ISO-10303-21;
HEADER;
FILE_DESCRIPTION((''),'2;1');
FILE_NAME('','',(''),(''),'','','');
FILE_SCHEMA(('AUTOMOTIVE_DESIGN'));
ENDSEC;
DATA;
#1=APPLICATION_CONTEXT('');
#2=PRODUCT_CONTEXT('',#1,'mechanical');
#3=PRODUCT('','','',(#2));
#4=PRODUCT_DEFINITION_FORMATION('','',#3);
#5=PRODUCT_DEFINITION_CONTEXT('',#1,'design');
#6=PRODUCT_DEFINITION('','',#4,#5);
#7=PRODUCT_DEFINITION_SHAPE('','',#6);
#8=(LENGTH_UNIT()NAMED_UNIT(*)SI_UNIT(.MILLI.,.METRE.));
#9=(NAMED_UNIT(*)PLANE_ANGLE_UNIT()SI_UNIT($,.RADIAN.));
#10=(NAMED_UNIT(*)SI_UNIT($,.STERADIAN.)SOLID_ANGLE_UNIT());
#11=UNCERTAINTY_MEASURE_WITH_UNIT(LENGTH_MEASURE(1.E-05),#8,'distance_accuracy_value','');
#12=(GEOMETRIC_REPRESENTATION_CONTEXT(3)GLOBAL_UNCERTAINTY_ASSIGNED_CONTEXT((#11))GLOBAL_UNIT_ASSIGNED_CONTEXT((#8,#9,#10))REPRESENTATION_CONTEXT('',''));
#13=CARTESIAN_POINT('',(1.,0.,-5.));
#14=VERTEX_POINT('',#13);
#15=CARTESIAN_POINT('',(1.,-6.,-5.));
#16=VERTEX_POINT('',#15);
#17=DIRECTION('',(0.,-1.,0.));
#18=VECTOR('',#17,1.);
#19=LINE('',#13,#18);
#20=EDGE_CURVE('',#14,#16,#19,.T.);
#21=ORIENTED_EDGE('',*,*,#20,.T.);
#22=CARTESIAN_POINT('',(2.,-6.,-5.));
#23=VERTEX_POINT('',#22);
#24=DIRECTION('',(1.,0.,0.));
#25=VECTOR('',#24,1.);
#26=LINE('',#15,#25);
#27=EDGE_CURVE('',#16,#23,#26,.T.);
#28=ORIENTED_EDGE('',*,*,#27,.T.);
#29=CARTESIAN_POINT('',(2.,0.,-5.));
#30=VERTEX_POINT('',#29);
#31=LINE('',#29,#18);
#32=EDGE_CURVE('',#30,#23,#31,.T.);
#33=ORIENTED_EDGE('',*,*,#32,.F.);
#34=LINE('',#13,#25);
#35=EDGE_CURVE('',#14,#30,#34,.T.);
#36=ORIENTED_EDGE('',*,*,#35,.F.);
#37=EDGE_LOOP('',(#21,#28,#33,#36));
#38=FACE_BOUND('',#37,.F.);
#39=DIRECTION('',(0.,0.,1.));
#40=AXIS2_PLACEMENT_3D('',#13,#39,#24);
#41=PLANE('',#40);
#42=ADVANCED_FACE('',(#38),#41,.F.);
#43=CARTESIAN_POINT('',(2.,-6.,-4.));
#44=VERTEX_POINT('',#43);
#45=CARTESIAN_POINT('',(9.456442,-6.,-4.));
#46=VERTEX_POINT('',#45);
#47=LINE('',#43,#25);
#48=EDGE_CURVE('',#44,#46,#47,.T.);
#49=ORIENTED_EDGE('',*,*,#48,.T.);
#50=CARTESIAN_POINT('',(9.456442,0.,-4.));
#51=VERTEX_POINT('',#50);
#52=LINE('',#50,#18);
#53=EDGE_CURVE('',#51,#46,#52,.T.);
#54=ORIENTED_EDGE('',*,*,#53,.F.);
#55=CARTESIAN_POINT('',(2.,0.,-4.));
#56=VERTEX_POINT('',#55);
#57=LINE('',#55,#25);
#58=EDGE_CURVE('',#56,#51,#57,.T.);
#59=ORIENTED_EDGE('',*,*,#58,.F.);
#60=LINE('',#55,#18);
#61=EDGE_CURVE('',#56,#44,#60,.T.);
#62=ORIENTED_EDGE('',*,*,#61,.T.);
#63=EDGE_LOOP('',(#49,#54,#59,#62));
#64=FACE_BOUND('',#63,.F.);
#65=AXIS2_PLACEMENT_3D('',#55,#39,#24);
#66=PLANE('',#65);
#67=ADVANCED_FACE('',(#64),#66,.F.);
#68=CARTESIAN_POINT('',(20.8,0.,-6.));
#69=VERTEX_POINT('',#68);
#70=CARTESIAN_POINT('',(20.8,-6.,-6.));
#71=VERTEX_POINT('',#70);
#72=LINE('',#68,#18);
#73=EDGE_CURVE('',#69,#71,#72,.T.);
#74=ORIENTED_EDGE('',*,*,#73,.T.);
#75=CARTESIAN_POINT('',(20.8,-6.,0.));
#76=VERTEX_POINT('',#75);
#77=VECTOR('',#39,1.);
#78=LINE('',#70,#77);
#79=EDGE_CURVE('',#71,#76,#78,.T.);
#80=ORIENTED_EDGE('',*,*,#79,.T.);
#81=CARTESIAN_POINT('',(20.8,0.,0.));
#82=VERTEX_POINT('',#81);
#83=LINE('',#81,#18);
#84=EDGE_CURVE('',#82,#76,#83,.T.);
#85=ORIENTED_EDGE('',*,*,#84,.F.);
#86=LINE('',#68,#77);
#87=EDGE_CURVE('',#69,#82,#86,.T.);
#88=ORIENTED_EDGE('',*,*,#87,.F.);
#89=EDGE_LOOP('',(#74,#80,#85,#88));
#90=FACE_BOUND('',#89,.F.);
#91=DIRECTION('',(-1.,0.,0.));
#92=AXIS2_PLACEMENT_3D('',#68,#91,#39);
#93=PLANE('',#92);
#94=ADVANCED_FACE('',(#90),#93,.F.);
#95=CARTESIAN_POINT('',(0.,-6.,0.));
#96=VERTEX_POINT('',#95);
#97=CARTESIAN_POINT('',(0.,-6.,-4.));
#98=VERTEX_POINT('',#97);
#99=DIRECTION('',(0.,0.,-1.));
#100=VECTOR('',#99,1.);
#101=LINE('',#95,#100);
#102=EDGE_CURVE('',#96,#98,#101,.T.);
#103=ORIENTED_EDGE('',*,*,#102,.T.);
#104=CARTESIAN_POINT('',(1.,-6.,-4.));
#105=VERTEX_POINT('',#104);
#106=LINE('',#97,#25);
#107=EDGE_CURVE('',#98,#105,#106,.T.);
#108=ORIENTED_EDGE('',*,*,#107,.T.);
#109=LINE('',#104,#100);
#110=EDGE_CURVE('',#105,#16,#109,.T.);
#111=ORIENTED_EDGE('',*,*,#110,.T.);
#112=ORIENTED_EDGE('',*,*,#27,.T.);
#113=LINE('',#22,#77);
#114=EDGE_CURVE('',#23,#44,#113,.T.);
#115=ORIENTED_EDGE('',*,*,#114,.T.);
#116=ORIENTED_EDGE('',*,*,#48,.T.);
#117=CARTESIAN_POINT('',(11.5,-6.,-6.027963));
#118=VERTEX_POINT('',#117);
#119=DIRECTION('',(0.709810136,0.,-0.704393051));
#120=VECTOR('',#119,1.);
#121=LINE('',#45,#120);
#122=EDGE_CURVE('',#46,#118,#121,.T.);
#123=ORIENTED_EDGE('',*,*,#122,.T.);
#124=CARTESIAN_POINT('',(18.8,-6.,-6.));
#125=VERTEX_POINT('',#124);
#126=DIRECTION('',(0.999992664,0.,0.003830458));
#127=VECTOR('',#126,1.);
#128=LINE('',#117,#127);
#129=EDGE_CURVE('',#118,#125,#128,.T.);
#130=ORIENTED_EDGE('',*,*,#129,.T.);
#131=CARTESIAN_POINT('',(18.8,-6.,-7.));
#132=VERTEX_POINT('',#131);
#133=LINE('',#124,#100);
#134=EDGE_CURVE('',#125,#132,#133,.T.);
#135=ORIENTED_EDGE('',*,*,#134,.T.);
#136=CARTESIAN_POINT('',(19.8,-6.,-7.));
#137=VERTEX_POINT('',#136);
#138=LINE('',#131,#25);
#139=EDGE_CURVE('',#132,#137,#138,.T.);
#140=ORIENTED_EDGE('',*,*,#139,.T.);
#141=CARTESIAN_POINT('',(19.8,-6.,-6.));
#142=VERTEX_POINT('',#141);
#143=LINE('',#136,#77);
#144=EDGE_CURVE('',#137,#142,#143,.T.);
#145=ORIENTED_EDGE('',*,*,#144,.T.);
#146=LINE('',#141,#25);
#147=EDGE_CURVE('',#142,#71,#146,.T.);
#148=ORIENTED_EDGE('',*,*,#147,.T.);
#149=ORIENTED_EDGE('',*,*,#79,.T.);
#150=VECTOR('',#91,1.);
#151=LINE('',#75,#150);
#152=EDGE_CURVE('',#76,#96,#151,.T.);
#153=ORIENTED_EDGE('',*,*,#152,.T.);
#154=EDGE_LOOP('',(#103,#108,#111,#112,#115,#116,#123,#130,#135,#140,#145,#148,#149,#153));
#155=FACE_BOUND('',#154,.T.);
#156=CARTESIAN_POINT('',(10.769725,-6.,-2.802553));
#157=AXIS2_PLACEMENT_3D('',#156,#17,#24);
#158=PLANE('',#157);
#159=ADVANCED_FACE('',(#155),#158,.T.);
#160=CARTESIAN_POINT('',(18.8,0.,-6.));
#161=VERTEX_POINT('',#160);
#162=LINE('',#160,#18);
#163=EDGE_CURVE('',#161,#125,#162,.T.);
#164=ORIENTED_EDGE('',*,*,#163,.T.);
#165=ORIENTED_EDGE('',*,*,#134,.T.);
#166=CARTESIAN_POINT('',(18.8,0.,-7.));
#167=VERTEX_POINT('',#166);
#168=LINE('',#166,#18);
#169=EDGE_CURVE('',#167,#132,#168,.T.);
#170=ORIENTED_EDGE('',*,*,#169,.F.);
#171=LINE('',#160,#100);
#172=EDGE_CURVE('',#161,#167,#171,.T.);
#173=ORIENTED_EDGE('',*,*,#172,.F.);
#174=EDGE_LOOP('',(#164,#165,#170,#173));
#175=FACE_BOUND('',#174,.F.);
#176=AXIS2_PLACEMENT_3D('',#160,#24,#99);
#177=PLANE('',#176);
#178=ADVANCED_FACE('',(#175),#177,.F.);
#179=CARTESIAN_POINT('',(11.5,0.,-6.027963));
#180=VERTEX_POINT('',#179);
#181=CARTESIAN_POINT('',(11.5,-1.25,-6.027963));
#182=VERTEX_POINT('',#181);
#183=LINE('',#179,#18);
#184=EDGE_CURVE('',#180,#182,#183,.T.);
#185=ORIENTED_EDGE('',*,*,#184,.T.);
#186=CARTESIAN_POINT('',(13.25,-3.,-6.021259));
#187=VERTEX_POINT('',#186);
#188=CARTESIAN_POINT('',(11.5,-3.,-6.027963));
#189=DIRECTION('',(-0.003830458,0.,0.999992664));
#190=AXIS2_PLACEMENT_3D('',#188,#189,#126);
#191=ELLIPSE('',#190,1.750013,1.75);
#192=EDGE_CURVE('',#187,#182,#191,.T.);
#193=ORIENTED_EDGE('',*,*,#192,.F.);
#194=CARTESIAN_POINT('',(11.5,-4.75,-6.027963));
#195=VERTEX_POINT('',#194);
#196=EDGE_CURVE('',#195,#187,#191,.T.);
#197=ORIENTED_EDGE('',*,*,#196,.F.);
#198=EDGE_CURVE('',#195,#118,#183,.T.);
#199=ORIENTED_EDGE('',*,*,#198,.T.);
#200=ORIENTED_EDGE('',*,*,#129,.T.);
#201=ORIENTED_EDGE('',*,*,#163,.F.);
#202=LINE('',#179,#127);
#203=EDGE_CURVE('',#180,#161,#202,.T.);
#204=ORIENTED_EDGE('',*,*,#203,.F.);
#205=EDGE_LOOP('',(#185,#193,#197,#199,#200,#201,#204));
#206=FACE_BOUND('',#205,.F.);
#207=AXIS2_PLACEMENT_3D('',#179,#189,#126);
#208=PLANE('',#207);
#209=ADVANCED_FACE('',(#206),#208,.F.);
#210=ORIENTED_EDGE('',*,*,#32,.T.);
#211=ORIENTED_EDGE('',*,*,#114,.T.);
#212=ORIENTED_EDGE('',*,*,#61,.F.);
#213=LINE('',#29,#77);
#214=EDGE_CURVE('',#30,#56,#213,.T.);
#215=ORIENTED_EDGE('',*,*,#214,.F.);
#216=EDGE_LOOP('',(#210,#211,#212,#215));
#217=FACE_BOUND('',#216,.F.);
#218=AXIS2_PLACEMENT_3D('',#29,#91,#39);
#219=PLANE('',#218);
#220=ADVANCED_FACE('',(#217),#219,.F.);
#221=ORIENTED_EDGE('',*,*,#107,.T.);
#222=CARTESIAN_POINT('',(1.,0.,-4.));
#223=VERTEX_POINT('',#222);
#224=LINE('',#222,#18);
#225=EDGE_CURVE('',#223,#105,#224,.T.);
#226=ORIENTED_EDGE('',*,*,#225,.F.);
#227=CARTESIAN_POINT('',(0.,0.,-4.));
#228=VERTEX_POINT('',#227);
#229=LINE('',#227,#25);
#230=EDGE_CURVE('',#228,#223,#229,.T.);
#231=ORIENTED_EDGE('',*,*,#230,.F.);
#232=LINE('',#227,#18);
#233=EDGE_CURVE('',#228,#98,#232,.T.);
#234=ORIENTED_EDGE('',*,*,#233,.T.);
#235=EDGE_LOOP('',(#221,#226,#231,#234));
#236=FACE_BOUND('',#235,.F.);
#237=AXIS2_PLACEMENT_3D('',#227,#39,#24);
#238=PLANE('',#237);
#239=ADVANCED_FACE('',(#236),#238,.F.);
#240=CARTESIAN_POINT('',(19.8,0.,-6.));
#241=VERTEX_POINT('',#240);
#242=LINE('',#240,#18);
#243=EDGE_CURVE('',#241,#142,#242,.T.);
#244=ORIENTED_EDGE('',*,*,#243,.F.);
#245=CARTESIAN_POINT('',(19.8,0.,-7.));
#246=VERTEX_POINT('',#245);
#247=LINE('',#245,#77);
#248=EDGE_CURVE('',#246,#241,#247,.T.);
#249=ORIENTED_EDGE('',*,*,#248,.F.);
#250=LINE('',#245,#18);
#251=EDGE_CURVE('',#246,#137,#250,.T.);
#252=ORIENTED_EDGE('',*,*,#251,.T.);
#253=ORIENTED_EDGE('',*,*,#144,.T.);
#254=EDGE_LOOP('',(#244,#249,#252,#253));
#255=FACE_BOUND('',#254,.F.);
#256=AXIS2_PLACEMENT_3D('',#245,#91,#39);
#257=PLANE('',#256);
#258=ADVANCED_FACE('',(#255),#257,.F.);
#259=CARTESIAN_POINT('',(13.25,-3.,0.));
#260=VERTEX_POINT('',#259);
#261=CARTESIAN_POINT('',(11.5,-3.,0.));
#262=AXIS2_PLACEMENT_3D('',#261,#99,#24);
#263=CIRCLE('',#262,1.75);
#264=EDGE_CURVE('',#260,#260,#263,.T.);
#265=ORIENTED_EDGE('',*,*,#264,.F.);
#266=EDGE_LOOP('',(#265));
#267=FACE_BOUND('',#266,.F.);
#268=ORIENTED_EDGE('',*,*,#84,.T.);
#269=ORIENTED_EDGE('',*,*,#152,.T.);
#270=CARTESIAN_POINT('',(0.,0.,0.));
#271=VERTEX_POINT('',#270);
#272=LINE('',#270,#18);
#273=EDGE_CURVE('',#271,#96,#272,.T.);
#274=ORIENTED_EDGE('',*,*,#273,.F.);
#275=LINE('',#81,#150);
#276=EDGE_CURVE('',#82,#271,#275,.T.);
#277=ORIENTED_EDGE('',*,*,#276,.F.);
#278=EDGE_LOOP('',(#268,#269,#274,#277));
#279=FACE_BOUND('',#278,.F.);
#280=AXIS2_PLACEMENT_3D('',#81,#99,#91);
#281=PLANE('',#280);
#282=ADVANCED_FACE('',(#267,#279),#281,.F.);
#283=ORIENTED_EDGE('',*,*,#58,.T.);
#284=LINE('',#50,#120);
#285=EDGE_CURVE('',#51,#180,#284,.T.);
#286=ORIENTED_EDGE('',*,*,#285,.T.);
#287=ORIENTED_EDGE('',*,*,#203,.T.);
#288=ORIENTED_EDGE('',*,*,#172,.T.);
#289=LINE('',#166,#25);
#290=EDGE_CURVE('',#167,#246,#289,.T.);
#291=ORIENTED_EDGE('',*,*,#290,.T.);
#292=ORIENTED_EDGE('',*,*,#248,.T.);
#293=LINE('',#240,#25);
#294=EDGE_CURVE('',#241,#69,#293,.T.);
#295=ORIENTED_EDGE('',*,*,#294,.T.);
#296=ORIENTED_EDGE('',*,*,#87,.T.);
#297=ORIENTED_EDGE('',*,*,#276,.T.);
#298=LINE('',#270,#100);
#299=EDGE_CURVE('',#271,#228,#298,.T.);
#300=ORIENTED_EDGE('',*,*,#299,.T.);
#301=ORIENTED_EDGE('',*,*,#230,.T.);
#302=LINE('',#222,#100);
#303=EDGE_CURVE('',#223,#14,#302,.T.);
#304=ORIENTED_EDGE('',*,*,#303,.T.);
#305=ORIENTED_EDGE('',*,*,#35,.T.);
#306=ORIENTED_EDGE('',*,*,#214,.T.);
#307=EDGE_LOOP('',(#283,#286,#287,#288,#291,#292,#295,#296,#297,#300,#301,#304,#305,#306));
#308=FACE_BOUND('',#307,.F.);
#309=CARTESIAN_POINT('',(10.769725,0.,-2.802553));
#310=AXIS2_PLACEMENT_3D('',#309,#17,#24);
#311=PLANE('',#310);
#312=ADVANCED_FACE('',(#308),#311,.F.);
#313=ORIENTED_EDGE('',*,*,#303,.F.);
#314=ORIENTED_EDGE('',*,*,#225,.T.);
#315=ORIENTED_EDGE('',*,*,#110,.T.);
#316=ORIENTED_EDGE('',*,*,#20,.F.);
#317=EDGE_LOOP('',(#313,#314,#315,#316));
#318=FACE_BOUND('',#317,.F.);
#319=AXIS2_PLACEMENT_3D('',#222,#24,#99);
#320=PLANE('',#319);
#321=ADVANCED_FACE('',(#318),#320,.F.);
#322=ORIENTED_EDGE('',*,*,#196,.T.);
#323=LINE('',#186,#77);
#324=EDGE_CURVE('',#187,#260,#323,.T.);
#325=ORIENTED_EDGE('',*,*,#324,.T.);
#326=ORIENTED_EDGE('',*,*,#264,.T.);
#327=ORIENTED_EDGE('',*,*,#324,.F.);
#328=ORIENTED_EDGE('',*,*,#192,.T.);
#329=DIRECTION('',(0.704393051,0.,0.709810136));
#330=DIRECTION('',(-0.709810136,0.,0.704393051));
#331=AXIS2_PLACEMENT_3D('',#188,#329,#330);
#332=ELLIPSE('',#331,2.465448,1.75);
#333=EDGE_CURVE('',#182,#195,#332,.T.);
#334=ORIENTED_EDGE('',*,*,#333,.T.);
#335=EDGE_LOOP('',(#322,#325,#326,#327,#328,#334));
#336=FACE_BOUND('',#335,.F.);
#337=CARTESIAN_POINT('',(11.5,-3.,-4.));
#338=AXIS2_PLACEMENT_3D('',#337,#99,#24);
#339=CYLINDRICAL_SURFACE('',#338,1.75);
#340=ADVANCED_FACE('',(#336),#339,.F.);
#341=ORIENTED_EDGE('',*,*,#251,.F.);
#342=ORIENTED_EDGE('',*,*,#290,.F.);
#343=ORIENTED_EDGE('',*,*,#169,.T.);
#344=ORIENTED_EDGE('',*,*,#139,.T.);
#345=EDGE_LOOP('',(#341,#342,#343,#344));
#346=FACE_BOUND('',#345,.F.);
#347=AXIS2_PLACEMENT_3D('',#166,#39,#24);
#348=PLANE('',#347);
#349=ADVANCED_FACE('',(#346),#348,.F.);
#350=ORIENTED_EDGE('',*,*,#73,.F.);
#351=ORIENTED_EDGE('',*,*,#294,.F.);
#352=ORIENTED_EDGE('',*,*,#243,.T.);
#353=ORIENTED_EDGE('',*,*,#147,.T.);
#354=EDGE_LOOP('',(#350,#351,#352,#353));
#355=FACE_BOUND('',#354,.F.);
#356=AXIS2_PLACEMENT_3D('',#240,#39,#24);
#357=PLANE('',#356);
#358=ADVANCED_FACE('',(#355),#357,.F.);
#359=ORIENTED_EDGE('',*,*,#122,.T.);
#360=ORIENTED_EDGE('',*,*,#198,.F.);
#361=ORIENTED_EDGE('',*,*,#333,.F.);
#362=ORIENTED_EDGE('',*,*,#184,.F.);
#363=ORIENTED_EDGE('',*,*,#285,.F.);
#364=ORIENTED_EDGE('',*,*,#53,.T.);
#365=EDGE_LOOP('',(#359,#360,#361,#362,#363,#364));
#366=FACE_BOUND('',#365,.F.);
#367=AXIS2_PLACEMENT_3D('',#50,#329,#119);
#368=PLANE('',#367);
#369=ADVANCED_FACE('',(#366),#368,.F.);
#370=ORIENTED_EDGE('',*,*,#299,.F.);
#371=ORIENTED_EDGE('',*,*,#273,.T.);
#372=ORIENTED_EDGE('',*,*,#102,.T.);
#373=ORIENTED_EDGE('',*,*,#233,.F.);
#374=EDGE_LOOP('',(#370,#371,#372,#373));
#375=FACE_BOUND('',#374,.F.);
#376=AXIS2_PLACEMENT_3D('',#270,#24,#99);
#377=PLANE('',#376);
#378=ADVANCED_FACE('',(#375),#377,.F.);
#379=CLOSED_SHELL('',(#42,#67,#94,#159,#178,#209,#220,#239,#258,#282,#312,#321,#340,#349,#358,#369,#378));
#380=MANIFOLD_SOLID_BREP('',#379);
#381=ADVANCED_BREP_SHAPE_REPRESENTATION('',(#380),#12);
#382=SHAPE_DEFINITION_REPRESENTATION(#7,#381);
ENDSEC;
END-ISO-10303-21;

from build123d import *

# Parameters (mm, degrees)
F1_DEPTH      = 6
F2_R          = 1.75
F3_DEPTH      = 4.001
F3_DEPTH_BACK = 3.001


# Not quite as in the source:
# - a feature of the source that left no trace in its solid (it failed there, or was rolled back) is left out


with BuildPart() as f1:
    # F0 (on Front) → F1 (new body)
    with BuildSketch(Plane.XZ):
        Polygon((20.8, 0), (0, 0), (0, -4), (1, -4), (1, -5), (2, -5), (2, -4), (9.4564415496, -4), (11.5, -6.0279625468), (18.8, -6), (18.8, -7), (19.8, -7), (19.8, -6), (20.8, -6), align=None)
    extrude(amount=F1_DEPTH)

    # F2 (on face) → F3 (cut, two sides)
    with BuildSketch(Plane(origin=(0, 0, -4), x_dir=(1, 0, 0), z_dir=(0, 0, -1))) as f3_sk:
        with Locations((11.5, 3)):
            Circle(F2_R)
    extrude(amount=-F3_DEPTH, mode=Mode.SUBTRACT)
    extrude(f3_sk.sketch, amount=F3_DEPTH_BACK, mode=Mode.SUBTRACT)


solid = f1.part
